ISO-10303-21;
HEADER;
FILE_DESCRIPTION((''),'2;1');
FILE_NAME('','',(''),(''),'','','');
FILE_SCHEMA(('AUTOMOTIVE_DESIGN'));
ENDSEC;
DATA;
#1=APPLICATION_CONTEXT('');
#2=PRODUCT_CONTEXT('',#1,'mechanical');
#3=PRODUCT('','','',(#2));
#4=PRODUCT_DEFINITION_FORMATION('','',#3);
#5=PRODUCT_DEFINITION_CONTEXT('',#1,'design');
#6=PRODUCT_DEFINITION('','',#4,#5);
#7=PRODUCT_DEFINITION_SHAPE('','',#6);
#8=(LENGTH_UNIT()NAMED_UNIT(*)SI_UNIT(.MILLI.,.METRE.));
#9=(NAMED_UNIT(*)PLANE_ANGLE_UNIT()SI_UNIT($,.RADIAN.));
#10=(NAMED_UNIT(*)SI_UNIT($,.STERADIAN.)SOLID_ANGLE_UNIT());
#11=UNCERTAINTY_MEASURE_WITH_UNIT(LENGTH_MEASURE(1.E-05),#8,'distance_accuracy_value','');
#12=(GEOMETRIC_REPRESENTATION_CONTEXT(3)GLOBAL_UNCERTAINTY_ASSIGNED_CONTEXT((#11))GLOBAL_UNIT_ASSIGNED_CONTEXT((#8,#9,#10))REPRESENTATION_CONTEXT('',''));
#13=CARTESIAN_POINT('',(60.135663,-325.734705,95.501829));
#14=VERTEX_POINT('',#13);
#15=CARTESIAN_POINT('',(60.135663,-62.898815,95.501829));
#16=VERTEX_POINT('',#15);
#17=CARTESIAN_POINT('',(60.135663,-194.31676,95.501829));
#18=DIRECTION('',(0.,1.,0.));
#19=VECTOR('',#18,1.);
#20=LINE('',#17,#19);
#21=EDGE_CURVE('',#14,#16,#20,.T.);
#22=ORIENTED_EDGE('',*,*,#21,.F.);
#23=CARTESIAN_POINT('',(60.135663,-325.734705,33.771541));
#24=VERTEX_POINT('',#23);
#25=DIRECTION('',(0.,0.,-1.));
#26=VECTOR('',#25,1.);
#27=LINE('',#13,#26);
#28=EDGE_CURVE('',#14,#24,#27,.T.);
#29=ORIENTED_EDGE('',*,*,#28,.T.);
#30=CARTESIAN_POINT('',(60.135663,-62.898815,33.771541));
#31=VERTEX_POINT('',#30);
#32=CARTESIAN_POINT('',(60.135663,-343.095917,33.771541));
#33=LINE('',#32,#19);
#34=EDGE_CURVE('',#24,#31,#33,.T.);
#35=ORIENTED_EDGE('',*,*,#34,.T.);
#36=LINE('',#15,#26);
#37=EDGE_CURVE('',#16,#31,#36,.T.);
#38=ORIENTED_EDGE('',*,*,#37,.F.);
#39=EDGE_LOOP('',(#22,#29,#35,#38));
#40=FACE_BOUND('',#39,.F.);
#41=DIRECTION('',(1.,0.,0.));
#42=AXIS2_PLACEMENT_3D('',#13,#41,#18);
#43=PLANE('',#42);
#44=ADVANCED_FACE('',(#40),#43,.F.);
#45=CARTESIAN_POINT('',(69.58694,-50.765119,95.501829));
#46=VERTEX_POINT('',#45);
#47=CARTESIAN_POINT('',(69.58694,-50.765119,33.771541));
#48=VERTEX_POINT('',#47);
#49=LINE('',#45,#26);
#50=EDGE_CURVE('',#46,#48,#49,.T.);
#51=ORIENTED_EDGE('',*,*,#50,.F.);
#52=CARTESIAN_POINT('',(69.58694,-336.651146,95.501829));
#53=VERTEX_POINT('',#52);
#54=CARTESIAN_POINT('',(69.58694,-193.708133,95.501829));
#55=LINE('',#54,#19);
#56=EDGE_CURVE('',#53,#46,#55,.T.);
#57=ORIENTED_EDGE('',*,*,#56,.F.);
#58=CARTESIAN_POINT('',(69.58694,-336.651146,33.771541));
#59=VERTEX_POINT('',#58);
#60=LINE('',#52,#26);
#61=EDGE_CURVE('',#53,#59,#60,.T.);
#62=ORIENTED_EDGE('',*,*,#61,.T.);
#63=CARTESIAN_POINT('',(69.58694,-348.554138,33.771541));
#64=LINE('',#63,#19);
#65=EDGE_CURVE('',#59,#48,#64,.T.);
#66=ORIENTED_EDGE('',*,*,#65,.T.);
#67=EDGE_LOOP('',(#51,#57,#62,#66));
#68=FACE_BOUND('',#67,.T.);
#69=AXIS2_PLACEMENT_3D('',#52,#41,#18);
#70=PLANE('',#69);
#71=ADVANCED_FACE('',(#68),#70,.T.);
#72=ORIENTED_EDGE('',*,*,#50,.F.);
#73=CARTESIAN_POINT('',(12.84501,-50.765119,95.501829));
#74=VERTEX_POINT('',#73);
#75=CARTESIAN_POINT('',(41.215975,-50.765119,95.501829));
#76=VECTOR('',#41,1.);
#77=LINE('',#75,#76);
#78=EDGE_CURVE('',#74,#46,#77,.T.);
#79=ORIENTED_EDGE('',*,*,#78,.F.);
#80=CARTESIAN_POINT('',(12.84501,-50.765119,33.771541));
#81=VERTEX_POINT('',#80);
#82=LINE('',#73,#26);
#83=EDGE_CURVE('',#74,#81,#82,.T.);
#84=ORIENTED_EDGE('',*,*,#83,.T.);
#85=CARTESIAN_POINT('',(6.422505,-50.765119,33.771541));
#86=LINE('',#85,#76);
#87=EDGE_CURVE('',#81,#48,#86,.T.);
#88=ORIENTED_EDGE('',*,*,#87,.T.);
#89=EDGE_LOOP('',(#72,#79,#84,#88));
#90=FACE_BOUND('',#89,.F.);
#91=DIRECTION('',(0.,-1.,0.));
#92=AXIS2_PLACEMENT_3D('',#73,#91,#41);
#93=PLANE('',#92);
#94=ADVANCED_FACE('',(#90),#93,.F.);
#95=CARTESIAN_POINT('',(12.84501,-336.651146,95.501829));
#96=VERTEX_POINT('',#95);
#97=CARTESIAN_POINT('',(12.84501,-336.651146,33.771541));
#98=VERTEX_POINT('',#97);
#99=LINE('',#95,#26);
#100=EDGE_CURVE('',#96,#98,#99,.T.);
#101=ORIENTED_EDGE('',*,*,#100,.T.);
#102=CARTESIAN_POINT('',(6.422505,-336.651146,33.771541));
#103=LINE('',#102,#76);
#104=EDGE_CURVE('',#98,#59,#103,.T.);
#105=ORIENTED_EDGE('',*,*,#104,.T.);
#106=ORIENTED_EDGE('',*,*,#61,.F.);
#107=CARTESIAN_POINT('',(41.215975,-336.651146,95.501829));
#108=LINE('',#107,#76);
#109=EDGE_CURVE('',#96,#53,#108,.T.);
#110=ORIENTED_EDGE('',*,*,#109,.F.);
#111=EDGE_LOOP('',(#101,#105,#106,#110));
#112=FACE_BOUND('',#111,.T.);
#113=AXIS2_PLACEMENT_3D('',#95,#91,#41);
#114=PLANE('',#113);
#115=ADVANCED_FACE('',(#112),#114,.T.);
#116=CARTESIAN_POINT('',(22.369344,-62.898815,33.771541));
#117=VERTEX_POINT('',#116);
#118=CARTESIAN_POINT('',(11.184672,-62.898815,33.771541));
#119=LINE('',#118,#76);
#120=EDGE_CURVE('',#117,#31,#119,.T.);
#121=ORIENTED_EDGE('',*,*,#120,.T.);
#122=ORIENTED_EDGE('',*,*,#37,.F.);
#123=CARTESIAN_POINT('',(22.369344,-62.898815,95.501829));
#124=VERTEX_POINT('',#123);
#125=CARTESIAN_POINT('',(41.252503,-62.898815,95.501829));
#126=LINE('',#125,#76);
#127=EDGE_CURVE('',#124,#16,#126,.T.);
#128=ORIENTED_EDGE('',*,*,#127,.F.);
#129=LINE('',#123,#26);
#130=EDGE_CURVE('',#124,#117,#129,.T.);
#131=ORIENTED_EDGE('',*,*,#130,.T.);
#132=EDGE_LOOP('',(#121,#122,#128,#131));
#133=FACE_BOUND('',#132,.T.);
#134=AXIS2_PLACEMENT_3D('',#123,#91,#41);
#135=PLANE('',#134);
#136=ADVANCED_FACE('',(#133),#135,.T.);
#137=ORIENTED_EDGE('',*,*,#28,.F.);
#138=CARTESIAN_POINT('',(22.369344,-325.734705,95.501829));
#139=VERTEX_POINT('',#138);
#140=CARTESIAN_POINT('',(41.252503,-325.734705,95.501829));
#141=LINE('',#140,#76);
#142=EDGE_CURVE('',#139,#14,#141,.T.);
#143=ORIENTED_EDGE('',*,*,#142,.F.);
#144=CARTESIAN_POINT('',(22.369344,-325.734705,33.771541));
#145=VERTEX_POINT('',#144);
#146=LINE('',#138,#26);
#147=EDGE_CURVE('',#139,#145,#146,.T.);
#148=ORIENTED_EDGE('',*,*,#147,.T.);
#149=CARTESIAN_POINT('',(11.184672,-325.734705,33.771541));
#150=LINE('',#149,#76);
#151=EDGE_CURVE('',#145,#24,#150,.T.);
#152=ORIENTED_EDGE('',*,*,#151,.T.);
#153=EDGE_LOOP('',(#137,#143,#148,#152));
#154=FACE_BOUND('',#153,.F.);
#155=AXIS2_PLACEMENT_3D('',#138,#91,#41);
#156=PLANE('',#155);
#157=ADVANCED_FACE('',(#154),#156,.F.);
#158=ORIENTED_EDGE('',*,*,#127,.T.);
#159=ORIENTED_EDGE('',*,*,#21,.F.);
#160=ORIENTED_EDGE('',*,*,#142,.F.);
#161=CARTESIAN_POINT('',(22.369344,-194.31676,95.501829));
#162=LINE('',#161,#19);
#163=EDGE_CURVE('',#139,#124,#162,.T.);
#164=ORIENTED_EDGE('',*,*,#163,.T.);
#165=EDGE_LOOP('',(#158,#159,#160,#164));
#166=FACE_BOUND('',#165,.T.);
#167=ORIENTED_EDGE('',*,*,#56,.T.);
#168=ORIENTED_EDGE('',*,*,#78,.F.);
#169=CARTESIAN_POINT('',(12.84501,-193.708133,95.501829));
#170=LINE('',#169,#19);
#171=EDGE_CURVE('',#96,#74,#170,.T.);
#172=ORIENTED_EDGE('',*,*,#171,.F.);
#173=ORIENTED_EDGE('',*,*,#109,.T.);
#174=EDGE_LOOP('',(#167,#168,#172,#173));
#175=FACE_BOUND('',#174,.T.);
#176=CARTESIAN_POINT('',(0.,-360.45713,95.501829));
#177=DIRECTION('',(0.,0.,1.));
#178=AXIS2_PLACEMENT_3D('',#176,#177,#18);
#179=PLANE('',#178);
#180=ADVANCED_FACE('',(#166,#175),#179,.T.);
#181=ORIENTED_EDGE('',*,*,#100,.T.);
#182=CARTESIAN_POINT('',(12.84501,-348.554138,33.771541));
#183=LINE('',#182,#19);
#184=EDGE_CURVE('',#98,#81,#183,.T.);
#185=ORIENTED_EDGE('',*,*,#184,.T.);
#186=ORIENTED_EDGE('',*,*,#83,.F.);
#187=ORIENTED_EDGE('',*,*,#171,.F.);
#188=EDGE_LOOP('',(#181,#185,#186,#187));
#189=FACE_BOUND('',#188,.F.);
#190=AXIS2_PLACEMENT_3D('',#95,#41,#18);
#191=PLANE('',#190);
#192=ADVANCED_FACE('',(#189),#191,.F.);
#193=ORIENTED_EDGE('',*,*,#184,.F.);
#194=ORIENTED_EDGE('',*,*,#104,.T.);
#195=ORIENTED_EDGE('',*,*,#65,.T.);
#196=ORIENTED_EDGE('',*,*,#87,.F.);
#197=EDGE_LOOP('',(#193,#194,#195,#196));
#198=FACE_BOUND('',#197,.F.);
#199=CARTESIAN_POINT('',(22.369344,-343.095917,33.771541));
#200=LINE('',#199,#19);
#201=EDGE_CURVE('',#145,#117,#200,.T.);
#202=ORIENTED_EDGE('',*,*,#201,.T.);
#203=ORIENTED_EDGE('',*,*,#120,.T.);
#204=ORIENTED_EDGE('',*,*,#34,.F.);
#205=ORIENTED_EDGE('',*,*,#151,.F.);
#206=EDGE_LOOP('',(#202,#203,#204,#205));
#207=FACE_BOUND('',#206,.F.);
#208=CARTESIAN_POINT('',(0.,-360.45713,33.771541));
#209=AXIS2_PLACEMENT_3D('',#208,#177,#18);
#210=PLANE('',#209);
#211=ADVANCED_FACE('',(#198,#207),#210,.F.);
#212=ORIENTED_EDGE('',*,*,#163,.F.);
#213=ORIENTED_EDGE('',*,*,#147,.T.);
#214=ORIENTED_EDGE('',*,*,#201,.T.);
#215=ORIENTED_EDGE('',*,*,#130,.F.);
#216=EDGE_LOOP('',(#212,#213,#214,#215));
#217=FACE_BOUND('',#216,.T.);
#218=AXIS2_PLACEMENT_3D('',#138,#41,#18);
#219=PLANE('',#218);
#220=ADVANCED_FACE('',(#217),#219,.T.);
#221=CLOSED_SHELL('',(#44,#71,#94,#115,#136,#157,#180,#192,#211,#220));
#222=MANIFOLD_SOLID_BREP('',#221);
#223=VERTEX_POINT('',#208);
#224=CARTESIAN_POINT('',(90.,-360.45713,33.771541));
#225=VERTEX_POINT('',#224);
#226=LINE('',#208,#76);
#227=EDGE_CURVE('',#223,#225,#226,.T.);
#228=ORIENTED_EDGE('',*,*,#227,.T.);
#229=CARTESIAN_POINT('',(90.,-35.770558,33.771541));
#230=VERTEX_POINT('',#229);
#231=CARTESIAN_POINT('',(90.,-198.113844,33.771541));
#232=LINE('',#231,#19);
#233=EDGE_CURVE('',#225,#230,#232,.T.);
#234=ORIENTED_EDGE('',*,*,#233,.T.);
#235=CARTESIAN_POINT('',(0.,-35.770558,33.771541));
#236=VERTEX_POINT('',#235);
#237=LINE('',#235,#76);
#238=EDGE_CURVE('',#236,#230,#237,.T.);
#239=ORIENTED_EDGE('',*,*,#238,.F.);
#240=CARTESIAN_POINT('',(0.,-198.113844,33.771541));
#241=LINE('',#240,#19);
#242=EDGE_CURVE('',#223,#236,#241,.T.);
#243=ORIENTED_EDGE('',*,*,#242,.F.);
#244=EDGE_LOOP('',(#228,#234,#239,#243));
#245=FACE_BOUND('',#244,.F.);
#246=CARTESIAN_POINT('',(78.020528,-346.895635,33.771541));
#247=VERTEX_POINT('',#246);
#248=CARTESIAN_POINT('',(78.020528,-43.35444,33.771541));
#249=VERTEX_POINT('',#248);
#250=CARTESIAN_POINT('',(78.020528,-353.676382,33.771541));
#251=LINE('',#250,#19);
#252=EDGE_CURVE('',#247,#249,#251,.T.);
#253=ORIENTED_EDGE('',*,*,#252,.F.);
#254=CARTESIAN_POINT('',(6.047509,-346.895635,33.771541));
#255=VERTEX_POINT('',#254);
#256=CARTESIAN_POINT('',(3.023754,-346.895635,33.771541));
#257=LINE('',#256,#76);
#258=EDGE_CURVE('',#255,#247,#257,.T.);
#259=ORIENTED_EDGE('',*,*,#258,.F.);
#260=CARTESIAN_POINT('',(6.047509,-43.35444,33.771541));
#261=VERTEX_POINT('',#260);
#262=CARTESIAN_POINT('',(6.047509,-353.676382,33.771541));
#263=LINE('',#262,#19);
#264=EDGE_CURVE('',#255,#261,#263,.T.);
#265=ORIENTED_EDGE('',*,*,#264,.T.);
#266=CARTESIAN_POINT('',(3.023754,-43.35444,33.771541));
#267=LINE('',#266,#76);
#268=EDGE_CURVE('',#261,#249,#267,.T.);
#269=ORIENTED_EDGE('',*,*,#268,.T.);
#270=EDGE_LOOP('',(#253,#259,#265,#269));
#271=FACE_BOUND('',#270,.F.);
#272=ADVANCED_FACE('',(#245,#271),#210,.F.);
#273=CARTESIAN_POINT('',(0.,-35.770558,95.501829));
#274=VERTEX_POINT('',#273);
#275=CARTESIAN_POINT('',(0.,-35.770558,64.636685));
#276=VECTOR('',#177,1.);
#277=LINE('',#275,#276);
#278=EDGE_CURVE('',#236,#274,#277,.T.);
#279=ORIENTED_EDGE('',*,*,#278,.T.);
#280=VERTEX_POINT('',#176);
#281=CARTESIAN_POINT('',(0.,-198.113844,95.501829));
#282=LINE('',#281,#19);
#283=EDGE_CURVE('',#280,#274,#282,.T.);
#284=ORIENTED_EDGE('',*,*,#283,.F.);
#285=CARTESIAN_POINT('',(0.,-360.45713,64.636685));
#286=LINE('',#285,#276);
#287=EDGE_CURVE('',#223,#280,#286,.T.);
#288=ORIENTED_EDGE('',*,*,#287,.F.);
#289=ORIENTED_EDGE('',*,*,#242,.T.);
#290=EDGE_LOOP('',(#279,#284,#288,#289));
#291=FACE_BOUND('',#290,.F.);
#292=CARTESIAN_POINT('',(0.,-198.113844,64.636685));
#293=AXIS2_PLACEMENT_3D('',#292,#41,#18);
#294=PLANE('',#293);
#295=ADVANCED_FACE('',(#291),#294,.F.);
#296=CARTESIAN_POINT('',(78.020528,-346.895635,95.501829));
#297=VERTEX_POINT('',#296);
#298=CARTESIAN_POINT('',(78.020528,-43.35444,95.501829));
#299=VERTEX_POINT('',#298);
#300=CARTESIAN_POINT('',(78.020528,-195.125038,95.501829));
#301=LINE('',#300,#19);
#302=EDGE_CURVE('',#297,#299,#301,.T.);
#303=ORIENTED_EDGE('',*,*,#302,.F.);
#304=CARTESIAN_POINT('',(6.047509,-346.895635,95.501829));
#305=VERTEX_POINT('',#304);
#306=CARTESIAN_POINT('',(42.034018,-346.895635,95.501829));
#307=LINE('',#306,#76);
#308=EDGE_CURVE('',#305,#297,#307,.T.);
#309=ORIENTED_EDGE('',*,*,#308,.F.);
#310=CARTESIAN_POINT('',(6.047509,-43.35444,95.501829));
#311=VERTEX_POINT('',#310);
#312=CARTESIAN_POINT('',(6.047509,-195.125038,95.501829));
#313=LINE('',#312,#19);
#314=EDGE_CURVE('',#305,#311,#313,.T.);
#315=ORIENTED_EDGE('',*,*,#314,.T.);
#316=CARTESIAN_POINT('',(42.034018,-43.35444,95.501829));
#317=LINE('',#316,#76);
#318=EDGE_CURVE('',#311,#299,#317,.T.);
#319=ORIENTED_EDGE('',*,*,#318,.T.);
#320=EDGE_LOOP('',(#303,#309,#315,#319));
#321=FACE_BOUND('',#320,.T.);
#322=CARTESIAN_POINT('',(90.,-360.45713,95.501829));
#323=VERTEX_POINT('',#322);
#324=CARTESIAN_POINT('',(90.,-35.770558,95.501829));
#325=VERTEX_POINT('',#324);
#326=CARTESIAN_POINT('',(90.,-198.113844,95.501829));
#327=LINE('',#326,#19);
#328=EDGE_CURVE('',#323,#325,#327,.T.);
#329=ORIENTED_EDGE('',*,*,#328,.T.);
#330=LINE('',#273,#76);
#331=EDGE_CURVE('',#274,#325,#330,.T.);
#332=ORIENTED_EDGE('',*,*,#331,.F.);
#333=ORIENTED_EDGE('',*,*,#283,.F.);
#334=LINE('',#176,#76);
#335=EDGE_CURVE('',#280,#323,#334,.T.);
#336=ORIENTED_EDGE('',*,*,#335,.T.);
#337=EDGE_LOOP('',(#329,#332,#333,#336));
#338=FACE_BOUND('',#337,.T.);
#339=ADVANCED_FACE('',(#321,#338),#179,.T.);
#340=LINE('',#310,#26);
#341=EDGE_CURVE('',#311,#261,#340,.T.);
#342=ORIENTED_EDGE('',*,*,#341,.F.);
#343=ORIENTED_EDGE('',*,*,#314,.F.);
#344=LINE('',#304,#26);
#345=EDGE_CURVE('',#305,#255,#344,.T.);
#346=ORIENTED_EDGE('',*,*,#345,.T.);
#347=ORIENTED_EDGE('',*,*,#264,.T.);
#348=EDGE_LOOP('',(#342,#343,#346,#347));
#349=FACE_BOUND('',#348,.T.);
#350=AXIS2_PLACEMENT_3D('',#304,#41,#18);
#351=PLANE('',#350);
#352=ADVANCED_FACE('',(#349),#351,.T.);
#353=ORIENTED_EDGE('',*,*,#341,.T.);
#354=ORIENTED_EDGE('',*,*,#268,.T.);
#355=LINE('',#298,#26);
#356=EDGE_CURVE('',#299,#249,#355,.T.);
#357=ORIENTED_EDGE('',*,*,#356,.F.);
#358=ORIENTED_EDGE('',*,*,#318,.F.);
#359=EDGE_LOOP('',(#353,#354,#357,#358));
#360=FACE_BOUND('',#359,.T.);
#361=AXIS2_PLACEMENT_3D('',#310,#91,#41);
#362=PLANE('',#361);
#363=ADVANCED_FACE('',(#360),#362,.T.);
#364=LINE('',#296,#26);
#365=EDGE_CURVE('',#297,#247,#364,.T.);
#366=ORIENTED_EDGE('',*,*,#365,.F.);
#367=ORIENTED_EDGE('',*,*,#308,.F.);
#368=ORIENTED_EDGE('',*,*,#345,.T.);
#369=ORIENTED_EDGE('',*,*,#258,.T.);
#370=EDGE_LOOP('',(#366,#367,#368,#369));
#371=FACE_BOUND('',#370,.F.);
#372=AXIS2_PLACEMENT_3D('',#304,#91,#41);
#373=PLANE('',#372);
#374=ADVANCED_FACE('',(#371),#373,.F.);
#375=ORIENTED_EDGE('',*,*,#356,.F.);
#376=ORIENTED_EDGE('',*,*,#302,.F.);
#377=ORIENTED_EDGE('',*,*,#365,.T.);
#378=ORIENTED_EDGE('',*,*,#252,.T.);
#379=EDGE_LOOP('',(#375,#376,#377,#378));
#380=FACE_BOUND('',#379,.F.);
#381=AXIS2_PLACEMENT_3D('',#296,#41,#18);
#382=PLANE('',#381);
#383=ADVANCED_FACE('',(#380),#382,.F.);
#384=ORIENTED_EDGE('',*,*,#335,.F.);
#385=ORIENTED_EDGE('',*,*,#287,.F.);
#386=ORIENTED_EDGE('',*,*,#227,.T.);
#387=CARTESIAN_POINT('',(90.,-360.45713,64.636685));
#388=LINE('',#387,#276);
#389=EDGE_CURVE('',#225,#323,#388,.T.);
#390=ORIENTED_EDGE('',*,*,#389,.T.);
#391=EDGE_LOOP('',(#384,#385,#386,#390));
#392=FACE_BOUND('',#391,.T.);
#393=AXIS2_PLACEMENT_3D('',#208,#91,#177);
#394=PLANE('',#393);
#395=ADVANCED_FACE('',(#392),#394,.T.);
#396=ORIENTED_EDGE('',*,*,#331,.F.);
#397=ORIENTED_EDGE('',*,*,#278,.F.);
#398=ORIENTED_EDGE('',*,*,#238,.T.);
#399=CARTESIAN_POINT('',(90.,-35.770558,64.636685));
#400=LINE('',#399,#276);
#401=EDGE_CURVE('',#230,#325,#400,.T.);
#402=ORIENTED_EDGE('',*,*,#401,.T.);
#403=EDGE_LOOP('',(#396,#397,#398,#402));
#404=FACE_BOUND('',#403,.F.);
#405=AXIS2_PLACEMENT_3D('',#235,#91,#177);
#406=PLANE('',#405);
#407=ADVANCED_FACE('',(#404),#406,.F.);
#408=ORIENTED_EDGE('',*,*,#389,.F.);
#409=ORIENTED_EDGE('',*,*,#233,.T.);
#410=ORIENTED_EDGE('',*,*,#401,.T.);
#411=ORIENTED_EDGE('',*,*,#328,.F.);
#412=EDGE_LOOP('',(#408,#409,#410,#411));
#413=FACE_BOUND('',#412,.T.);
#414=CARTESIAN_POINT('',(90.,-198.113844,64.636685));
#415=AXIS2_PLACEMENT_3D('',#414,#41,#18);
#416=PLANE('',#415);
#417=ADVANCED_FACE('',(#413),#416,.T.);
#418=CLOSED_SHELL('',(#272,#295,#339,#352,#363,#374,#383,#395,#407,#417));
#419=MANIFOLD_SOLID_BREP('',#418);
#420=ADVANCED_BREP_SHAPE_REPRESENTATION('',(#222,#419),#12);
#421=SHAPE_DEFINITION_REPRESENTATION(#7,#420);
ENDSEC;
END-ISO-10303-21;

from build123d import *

# Parameters (mm, degrees)
F0_W     = 324.6865719557
F0_H     = 61.7302879691
F1_DEPTH = 90
F3_W     = 71.9730192795
F3_H     = 303.5411946476
F3_W_2   = 56.7419305444
F3_H_2   = 285.8860269189
F3_W_3   = 37.7663187683
F3_H_3   = 262.8358900547
F4_DEPTH = 61.7312879691


# Not quite as in the source:
# - the program builds the solid bodies; features that only make, move or delete a surface that nothing else refers to are left out


with BuildPart() as f1:
    # F0 (on Right) → F1 (new body)
    with BuildSketch(Plane.YZ):
        with Locations((-198.1138437986, 64.6366849542)):
            Rectangle(F0_W, F0_H)
    extrude(amount=F1_DEPTH)

    # F3 (on face) → F4 (cut, through all)
    with BuildSketch(Plane.XY.offset(95.5018289387)):
        with Locations((42.0340183191, -195.1250378042)):
            Rectangle(F3_W, F3_H)
        with Locations((41.2159748375, -193.7081329525)):
            Rectangle(F3_W_2, F3_H_2, mode=Mode.SUBTRACT)
        with Locations((41.2525031716, -194.3167597055)):
            Rectangle(F3_W_3, F3_H_3)
    extrude(amount=-F4_DEPTH, mode=Mode.SUBTRACT)


solid = f1.part
